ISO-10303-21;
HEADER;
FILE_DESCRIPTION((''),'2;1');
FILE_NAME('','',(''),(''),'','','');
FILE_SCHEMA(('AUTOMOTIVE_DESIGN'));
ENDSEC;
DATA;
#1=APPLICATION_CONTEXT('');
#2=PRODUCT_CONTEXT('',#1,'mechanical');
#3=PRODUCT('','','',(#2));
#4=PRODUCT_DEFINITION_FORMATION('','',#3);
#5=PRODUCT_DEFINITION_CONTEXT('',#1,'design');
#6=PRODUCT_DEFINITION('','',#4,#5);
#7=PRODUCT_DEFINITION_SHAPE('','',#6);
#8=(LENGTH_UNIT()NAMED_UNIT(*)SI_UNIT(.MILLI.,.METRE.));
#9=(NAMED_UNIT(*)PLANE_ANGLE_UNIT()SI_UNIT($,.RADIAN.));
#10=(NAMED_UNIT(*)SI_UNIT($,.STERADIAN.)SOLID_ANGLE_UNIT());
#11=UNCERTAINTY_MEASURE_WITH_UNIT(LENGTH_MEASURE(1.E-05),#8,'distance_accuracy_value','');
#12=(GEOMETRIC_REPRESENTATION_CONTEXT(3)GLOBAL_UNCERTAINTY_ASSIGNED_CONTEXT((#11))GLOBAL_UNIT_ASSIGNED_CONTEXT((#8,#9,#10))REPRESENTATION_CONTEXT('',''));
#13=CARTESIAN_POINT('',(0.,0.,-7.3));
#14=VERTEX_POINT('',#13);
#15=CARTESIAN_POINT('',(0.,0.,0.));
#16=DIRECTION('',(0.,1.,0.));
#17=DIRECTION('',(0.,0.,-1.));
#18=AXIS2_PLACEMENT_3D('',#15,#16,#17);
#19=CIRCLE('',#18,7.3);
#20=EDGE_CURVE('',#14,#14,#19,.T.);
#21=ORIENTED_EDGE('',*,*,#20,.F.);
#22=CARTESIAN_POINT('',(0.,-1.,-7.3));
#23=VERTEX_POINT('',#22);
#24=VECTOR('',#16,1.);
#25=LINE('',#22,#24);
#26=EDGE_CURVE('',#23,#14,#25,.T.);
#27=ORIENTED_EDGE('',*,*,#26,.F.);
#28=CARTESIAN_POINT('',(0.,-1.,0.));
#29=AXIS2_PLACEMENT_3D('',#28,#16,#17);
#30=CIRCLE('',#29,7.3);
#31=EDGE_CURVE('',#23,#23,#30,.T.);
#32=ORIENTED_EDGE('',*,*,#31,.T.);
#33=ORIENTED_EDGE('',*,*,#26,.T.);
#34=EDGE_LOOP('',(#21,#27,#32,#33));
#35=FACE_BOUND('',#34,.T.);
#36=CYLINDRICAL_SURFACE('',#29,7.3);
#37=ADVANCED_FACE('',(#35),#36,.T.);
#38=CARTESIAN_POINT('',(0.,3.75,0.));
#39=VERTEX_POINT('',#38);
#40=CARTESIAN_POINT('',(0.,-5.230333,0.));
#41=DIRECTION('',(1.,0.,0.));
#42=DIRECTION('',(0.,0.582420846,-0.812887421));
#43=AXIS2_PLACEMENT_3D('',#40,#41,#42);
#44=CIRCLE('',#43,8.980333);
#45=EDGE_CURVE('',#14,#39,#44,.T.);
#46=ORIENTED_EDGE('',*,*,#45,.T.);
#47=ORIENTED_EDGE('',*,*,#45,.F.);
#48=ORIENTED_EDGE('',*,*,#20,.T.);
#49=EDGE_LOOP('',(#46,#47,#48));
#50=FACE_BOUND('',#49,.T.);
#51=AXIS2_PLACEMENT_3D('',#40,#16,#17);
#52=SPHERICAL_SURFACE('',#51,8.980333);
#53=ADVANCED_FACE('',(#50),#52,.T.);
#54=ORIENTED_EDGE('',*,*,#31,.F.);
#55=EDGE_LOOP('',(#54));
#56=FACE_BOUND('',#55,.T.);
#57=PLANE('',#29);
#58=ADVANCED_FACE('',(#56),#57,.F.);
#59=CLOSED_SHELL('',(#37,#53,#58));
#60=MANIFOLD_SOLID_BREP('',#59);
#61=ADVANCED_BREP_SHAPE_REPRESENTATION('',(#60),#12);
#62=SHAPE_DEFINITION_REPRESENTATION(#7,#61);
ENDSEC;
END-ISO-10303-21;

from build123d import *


# Not quite as in the source:
# - a feature names something its author has since deleted; it is built from what else it names


with BuildPart() as f1:
    # F0 (on Right) → F1 (revolve)
    with BuildSketch(Plane.YZ):
        with BuildLine():
            Line((3.75, 0), (0, 0))
            Line((0, 0), (-1, 0))
            Line((-1, 0), (-1, -7.3))
            Line((-1, -7.3), (0, -7.3))
            ThreePointArc((0, -7.3), (2.7576740388, -4.1034284446), (3.75, 0))
        make_face()
    revolve(axis=Axis((0, 1.875, 0), (0, 1, 0)))


solid = f1.part
